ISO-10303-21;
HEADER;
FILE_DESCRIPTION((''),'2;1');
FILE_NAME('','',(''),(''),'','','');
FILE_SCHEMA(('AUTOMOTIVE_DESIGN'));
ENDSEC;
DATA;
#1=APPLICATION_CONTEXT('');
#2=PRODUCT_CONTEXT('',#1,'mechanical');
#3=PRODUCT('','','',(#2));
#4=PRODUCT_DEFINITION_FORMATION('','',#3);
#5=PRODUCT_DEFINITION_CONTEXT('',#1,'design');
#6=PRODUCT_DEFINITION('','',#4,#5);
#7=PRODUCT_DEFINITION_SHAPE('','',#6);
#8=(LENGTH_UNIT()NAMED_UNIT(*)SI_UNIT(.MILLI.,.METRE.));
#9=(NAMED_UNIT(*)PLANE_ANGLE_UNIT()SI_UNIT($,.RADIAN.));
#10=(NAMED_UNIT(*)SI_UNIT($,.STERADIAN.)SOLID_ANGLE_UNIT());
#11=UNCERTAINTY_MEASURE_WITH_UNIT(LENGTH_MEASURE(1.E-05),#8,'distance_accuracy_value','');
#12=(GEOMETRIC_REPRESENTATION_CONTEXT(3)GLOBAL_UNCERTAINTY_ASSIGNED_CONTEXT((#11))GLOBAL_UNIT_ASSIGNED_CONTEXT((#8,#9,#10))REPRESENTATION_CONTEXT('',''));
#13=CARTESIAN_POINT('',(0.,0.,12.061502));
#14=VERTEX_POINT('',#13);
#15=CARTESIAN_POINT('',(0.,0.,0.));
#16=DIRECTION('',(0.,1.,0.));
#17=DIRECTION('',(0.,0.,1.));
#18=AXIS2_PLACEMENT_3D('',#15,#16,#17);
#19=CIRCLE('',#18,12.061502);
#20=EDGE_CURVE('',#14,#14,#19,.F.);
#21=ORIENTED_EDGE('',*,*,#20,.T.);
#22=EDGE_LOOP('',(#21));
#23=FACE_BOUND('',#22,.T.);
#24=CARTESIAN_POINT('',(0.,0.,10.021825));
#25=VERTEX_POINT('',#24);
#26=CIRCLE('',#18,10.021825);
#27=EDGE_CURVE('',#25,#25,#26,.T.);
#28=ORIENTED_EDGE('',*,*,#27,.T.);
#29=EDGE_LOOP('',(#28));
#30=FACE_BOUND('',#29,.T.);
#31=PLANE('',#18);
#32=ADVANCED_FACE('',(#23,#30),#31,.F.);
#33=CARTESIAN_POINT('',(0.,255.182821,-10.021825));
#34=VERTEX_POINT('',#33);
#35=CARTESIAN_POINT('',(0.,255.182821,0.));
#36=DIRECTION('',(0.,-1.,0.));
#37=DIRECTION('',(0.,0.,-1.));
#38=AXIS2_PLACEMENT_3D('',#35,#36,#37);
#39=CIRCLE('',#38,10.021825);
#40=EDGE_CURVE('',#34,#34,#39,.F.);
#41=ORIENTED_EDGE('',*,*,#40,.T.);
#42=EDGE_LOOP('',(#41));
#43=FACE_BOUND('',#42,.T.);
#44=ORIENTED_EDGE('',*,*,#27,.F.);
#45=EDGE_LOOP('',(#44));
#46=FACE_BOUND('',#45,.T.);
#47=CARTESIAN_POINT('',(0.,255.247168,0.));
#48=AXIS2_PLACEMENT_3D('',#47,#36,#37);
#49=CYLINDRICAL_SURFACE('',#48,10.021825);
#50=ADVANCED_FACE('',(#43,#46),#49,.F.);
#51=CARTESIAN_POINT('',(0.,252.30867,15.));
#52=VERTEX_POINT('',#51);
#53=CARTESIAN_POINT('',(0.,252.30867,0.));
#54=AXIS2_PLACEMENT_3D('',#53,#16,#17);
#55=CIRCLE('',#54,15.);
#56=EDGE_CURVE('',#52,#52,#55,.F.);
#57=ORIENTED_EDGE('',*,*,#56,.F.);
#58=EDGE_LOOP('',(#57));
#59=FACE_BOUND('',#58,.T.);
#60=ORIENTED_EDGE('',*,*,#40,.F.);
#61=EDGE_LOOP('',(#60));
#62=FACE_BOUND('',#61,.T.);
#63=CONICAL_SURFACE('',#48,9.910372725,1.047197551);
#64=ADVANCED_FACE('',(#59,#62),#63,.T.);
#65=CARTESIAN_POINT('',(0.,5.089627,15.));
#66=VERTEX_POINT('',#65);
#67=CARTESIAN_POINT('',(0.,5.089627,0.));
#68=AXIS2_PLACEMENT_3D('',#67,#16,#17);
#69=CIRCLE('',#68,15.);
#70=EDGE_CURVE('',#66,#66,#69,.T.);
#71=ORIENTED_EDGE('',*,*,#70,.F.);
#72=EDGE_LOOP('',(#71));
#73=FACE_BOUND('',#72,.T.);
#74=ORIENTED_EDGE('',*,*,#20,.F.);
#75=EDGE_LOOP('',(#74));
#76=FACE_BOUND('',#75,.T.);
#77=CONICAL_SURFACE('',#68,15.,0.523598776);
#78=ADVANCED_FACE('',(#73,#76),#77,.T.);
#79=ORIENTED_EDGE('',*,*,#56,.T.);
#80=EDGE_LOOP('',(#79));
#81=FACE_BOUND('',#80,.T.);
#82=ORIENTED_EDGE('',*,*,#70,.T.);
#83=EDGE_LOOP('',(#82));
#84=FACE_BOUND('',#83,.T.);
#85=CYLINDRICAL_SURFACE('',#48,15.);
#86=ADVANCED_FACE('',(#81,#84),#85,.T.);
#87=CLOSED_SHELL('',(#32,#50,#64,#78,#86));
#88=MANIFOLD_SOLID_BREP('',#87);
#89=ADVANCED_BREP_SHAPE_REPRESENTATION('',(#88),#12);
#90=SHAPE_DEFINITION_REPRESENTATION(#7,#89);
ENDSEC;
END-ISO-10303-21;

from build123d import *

# Parameters (mm, degrees)
SKETCH1_R           = 15
BOSS_EXTRUDE1_DEPTH = 255.247168
SKETCH2_R           = 10.021824618
CUT_EXTRUDE1_DEPTH  = 257.127149619
CHAMFER1_SIZE       = 2.938498
CHAMFER1_SIZE_2     = 5.089627


with BuildPart() as part:
    # Sketch1 → Boss-Extrude1 (new body)
    with BuildSketch(Plane(origin=(0, 0, 0), x_dir=(1, 0, 0), z_dir=(0, 1, 0))):
        with Locations(Location((0, 0, 0), (0, 0, 270))):
            Circle(SKETCH1_R)
    extrude(amount=BOSS_EXTRUDE1_DEPTH)

    # Sketch2 → Cut-Extrude1 (cut, through all)
    with BuildSketch(Plane(origin=(0, 0, 0), x_dir=(1, 0, 0), z_dir=(0, 1, 0))):
        with Locations(Location((0, 0, 0), (0, 0, 270))):
            Circle(SKETCH2_R)
    extrude(amount=CUT_EXTRUDE1_DEPTH, mode=Mode.SUBTRACT)

    # Chamfer1
    # the kernel refuses this chamfer: 5.089627, 2.938498 mm, written as the material it takes off along each edge
    with BuildSketch(Plane(origin=(0, 255.247168, 0), x_dir=(0, 0, 1), z_dir=(-1, 0, 0))) as chamfer1_piece_1:
        Polygon((15, -CHAMFER1_SIZE), (15 - CHAMFER1_SIZE_2, 0), (15, 0), align=None)
    revolve(axis=Axis((0, 255.247168, 0), (0, 1, 0)), mode=Mode.SUBTRACT)
    with BuildSketch(Plane(origin=(0, 0, 0), x_dir=(0, 0, 1), z_dir=(-1, 0, 0))) as chamfer1_piece_2:
        Polygon((15, CHAMFER1_SIZE_2), (15 - CHAMFER1_SIZE, 0), (15, 0), align=None)
    revolve(axis=Axis((0, 0, 0), (0, 1, 0)), mode=Mode.SUBTRACT)


solid = part.part
